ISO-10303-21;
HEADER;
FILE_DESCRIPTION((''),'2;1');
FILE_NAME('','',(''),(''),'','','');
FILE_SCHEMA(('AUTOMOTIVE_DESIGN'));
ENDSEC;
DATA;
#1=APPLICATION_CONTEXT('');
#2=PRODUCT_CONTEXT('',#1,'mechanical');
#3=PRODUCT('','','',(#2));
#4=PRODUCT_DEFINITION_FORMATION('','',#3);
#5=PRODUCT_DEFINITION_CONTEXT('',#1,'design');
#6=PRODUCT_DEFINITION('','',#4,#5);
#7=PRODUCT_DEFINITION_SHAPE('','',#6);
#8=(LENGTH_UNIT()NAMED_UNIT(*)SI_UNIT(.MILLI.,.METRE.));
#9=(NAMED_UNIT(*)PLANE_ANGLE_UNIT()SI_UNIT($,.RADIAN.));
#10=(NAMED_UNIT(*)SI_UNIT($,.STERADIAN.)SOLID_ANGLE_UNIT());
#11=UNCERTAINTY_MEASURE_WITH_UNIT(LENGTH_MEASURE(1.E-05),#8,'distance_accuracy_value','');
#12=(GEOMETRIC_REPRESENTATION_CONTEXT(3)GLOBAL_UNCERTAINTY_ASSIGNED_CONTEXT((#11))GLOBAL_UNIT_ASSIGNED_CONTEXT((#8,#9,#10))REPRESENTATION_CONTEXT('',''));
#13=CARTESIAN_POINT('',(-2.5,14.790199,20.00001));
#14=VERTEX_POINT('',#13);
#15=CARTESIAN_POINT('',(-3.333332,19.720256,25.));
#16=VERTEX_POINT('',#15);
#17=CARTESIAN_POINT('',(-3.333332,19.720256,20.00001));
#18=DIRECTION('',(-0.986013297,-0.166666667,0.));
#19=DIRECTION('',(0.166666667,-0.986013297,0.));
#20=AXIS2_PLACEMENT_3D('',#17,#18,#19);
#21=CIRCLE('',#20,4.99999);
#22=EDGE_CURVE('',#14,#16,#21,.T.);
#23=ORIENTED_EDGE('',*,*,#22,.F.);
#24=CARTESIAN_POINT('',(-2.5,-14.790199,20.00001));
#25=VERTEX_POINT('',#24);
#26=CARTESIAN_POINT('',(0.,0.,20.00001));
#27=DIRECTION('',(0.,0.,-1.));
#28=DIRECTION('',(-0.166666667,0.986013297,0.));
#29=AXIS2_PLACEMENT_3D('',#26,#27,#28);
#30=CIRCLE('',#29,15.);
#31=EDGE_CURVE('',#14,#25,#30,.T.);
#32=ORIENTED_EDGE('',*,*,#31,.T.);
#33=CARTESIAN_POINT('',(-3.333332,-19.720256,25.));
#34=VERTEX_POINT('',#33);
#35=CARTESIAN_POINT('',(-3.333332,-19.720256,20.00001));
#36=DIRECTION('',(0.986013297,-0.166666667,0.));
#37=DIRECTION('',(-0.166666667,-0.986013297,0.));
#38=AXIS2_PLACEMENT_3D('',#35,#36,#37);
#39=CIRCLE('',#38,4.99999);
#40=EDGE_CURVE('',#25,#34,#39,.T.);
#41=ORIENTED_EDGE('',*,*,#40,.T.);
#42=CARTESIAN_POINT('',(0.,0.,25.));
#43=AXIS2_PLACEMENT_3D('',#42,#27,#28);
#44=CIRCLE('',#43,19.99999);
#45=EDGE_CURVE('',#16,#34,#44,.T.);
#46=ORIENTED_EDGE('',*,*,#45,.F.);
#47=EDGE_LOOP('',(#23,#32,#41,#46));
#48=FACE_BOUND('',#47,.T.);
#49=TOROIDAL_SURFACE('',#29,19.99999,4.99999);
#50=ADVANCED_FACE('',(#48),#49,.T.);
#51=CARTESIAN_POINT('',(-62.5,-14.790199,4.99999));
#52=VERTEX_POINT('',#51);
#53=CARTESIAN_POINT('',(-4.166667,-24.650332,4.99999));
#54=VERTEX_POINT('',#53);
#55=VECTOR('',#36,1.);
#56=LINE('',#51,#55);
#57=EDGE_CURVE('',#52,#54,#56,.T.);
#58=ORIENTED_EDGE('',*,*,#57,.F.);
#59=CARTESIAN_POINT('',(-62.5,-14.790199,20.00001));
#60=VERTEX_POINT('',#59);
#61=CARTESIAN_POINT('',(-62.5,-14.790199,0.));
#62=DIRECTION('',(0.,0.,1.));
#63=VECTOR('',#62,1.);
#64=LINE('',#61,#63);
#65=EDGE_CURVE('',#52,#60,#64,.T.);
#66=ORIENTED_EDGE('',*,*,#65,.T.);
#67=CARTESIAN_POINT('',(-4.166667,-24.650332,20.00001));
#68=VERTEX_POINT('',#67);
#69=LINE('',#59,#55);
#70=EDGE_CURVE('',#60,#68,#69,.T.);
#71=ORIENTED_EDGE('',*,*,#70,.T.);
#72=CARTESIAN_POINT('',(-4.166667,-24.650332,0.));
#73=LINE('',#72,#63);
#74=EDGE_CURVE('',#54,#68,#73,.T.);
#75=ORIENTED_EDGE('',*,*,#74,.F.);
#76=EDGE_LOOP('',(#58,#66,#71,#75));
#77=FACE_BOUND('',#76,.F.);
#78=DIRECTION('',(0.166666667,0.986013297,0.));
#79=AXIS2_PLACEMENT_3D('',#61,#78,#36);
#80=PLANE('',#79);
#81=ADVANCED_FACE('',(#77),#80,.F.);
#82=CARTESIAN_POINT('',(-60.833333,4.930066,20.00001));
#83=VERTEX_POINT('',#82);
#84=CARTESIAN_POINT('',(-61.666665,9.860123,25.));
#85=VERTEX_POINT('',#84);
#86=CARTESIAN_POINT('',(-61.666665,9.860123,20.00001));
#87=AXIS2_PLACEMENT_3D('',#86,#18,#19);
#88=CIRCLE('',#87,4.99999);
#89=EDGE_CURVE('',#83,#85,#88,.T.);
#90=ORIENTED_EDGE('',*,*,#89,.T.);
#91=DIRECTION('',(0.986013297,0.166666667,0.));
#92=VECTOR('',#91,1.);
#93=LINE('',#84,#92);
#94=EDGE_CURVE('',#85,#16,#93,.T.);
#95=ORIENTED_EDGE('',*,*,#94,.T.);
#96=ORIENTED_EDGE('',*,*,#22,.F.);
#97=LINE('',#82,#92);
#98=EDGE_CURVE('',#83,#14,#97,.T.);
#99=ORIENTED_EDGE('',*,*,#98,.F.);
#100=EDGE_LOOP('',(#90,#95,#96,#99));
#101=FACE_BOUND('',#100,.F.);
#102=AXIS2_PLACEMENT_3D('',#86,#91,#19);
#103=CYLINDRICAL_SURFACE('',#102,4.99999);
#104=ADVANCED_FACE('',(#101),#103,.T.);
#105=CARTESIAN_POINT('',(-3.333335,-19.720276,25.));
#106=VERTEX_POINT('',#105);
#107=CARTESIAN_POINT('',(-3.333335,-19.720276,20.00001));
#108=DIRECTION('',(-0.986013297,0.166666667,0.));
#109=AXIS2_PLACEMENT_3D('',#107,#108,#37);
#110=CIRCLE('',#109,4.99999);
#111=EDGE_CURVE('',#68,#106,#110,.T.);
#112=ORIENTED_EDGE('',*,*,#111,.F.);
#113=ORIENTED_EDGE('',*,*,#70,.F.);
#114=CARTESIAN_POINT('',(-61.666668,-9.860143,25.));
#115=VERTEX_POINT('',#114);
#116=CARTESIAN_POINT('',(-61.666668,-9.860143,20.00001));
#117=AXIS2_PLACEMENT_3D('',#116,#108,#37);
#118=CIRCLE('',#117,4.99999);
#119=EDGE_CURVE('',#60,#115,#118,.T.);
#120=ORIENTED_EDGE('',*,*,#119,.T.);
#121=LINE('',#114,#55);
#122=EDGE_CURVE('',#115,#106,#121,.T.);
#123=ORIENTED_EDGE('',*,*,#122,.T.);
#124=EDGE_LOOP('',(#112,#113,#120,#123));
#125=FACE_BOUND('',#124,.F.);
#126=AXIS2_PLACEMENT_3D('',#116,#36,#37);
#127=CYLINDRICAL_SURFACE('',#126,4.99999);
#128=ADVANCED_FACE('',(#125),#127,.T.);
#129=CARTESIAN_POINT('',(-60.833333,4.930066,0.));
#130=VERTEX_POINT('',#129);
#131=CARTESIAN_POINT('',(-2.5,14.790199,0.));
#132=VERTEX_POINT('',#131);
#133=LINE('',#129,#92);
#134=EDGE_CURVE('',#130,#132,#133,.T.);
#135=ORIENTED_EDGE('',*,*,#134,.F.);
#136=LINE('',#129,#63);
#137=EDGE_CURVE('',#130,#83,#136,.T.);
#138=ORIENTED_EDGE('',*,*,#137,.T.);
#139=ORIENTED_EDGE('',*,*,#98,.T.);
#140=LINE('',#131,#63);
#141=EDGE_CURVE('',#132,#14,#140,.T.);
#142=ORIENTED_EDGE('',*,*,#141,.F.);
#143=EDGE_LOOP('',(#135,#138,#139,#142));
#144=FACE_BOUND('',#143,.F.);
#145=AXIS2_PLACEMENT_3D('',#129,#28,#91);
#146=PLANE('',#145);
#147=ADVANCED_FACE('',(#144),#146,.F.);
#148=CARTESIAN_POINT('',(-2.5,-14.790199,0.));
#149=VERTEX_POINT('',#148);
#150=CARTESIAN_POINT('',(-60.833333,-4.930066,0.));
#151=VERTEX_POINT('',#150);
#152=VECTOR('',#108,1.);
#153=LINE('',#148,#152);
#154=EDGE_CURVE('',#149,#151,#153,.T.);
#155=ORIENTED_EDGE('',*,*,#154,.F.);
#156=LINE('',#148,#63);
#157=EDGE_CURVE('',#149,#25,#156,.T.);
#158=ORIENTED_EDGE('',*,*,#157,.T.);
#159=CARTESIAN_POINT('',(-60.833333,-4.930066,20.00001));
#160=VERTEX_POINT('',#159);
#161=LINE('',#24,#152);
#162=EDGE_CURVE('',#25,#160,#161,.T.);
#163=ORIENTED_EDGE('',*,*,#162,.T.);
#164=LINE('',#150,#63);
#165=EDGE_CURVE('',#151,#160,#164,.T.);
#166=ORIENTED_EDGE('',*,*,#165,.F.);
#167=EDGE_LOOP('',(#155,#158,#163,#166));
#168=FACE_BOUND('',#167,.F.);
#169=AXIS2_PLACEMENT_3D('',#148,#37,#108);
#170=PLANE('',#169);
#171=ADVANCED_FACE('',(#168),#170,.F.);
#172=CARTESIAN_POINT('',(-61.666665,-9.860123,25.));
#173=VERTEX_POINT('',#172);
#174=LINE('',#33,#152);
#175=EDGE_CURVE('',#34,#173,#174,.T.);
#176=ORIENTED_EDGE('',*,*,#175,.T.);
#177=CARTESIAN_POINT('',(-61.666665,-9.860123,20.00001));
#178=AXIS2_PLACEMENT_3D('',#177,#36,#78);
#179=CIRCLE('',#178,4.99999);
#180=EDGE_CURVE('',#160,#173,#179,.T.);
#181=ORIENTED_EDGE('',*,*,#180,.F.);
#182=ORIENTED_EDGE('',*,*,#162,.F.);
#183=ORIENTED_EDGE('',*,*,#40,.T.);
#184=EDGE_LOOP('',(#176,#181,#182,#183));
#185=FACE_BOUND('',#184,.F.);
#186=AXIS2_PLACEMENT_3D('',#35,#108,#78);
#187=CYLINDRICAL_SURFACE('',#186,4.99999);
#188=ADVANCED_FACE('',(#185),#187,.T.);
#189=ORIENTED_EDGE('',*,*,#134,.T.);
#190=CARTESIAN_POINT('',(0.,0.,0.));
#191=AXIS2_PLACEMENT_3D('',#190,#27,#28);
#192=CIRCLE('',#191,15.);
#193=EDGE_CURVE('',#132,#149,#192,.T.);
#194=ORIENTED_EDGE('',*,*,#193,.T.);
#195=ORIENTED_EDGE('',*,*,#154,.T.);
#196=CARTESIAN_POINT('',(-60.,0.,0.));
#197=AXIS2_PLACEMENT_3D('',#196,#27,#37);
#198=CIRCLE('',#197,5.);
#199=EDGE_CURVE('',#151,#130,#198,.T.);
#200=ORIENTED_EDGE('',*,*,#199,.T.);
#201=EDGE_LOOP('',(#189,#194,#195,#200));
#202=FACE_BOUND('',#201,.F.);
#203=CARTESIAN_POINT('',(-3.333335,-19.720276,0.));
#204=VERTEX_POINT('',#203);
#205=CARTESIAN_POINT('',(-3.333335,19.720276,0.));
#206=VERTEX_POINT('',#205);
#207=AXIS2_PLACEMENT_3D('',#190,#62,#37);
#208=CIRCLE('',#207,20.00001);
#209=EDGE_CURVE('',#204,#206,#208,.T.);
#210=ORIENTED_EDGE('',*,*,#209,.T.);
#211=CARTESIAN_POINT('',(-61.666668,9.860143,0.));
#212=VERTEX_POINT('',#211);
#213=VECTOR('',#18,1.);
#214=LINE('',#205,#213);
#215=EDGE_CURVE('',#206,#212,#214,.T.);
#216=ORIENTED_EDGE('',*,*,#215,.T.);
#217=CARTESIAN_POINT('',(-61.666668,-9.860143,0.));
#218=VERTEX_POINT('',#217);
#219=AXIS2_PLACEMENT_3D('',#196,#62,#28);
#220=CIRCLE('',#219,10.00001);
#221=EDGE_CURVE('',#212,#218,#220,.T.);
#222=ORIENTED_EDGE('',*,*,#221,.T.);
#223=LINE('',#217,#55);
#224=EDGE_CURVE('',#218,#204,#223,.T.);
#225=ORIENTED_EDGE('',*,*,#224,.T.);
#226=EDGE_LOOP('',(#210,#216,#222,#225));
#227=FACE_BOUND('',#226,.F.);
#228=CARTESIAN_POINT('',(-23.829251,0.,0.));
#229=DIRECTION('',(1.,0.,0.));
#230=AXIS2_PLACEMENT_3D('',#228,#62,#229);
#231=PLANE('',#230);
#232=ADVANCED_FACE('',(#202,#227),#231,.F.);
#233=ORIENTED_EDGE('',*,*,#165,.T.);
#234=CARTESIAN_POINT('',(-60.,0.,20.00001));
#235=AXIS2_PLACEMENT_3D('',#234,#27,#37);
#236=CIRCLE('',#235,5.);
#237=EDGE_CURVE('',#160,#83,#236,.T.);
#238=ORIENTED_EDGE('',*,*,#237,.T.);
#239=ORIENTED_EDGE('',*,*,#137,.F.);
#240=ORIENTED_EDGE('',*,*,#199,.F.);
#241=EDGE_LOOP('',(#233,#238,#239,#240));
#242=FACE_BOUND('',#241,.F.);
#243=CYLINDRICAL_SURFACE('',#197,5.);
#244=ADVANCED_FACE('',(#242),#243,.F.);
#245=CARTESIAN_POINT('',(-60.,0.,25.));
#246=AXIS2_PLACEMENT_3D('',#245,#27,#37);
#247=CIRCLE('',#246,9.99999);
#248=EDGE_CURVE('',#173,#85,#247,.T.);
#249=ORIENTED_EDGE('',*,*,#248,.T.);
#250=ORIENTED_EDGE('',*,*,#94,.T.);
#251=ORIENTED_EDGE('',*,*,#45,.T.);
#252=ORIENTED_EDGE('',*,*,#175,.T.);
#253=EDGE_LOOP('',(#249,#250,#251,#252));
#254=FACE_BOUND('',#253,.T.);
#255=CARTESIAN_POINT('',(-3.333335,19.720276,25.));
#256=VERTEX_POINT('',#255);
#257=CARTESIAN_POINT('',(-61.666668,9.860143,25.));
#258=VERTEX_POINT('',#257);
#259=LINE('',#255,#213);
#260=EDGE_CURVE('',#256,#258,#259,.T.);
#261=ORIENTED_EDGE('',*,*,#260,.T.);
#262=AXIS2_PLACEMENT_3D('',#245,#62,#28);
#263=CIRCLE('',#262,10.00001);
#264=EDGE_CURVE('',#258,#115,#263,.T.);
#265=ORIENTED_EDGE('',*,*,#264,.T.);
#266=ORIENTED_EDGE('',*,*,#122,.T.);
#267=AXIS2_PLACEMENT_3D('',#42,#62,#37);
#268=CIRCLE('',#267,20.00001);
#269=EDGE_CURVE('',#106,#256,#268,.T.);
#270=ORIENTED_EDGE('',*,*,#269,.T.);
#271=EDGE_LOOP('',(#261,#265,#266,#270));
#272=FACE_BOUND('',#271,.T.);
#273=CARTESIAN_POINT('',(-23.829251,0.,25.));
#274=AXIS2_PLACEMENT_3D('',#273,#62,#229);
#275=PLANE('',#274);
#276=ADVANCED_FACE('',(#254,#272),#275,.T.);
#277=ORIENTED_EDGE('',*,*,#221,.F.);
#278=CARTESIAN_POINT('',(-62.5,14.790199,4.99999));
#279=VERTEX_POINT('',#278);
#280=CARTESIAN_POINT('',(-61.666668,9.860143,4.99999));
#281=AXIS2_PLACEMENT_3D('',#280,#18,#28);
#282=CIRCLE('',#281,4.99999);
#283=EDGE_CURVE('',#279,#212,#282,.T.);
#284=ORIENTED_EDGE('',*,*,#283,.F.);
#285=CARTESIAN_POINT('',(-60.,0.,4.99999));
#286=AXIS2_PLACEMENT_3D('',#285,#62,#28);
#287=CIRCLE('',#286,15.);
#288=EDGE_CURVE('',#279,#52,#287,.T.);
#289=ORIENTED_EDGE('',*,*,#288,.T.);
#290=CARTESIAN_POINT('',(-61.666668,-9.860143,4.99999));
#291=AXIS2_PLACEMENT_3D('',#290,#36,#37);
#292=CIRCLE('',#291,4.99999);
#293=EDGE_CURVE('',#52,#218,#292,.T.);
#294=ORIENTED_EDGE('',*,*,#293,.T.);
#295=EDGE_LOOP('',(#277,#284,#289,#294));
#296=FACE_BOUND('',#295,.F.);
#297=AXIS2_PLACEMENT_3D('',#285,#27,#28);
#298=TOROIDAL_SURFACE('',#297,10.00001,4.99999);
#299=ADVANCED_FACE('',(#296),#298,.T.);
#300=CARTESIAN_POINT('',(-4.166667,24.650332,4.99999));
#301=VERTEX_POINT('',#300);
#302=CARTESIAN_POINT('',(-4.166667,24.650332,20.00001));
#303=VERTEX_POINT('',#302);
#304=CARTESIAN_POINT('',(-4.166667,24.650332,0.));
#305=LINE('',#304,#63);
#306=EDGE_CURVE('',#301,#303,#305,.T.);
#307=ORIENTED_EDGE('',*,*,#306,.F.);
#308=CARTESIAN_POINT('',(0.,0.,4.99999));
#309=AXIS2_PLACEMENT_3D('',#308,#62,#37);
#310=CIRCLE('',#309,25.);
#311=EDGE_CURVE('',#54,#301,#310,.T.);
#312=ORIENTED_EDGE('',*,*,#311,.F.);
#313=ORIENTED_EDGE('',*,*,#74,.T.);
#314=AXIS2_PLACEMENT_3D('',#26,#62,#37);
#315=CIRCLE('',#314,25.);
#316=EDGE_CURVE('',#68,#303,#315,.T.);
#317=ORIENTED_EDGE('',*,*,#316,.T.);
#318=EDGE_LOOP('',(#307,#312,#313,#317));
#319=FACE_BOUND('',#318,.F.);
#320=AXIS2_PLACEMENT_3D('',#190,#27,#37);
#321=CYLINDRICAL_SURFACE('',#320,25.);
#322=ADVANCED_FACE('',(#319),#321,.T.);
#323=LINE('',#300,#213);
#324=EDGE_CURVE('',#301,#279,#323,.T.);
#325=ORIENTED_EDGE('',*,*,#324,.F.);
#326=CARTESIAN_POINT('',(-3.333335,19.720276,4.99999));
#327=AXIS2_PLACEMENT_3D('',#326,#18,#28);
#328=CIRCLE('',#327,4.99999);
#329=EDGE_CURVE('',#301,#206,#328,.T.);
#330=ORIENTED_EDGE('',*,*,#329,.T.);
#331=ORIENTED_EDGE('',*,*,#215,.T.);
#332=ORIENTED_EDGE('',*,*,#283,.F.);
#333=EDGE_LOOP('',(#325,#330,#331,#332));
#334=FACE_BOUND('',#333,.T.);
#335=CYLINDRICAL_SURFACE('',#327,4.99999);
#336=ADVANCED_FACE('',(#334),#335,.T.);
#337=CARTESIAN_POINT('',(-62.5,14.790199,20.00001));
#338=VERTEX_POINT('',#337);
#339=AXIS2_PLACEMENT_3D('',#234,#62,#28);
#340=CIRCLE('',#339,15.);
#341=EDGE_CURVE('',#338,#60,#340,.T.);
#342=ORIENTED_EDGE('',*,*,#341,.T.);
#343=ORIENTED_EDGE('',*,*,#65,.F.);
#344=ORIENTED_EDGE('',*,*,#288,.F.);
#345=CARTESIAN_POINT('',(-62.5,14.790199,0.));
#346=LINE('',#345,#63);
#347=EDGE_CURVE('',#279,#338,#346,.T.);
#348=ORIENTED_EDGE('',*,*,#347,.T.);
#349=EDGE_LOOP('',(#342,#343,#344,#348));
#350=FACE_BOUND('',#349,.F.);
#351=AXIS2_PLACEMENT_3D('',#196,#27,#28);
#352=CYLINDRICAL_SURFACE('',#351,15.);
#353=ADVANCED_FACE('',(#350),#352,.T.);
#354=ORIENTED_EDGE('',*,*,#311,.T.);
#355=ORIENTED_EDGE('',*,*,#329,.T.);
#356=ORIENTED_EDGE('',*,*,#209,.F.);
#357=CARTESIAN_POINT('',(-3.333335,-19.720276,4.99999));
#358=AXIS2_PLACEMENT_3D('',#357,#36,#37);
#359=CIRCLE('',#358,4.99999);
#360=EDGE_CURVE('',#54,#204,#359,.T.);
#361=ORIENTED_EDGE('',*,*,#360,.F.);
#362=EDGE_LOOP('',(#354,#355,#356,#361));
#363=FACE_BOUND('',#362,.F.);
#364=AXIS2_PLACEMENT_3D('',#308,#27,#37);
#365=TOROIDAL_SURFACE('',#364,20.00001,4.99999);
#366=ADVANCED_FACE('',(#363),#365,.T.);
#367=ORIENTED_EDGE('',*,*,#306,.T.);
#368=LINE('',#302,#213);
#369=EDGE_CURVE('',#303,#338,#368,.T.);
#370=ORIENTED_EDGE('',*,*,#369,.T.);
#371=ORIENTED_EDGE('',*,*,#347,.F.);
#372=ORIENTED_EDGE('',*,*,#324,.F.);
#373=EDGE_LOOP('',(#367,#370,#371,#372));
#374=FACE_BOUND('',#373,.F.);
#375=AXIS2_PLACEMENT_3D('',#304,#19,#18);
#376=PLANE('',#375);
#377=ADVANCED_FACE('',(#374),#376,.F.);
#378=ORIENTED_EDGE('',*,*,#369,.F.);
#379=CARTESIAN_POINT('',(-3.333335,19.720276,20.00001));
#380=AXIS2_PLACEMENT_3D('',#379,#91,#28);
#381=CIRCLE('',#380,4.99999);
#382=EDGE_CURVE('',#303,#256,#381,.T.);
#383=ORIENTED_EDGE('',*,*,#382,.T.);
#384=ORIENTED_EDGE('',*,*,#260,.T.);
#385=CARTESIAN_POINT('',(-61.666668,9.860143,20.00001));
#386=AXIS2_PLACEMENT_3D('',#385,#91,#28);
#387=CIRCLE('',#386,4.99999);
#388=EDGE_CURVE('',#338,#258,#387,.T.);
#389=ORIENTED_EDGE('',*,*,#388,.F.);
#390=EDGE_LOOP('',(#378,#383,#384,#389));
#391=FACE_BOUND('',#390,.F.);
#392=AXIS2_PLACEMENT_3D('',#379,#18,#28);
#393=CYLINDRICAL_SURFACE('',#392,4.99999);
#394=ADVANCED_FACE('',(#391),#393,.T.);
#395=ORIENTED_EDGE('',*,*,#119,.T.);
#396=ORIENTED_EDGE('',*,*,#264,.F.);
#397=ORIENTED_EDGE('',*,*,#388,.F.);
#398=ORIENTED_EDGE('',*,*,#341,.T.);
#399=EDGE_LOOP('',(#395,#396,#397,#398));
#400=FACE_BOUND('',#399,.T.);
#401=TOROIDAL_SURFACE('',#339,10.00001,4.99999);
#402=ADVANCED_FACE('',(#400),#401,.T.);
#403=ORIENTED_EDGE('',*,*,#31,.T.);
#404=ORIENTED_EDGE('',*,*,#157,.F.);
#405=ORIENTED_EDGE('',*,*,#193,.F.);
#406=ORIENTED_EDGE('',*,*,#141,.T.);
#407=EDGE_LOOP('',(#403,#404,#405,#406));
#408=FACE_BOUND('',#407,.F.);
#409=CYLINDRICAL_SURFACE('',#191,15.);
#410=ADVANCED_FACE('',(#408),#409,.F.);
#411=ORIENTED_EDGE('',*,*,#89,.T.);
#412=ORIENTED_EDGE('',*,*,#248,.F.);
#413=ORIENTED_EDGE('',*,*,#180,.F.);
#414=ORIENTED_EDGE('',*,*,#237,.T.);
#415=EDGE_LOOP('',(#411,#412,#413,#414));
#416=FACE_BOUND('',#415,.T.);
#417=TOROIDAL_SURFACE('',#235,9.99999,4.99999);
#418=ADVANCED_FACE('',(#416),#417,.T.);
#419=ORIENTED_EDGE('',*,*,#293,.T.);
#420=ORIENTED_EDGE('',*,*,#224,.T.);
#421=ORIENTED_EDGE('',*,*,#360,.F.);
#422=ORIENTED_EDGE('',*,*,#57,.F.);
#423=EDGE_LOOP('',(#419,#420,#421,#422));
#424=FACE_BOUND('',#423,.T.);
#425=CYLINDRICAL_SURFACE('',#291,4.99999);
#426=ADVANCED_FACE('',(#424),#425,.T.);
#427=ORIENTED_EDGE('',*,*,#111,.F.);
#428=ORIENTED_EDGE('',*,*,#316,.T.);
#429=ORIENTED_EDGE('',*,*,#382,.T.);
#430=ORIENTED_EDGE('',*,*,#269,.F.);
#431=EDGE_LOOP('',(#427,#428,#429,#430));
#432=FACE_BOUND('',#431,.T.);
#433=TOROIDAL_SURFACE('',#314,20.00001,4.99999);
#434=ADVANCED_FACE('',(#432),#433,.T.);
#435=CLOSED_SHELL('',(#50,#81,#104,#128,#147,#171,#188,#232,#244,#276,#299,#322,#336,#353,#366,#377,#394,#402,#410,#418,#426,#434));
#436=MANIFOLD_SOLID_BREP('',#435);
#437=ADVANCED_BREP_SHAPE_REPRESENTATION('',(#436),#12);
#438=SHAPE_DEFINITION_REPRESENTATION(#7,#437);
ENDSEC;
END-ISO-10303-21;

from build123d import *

# Parameters (mm, degrees)
F1_DEPTH = 25
F2_R     = 4.99999


# Not quite as in the source:
# - a fillet or chamfer is up to 0.001 mm smaller than in the source, because OpenCascade refuses the exact size


with BuildPart() as f1:
    # F0 (on Top) → F1 (new body)
    with BuildSketch(Plane.XY):
        with BuildLine():
            Line((-4.1666666667, 24.6503324296), (-62.5, 14.7901994577))
            ThreePointArc((-62.5, 14.7901994577), (-75, 0), (-62.5, -14.7901994577))
            Line((-62.5, -14.7901994577), (-4.1666666667, -24.6503324296))
            ThreePointArc((-4.1666666667, -24.6503324296), (25, 0), (-4.1666666667, 24.6503324296))
        make_face()
        with BuildLine():
            ThreePointArc((-60.8333333333, -4.9300664859), (-65, 0), (-60.8333333333, 4.9300664859))
            Line((-60.8333333333, 4.9300664859), (-2.5, 14.7901994577))
            ThreePointArc((-2.5, 14.7901994577), (15, 0), (-2.5, -14.7901994577))
            Line((-2.5, -14.7901994577), (-60.8333333333, -4.9300664859))
        make_face(mode=Mode.SUBTRACT)
    extrude(amount=F1_DEPTH)

    # F2 (radius 5 in the source; OpenCascade refuses exactly that, so slightly less here)
    f2_edges = [f1.edges().sort_by_distance(p)[0] for p in [
        (25, 0, 25),
        (-33.333333, 19.720266, 25),
        (-75, 0, 25),
        (-33.333333, -19.720266, 25),
        (-31.666667, 9.860133, 25),
        (15, 0, 25),
        (-31.666667, -9.860133, 25),
        (-65, 0, 25),
        (-4.166667, -24.650332, 12.5),
        (-4.166667, 24.650332, 12.5),
        (25, 0, 0),
    ]]
    fillet(f2_edges, radius=F2_R)


solid = f1.part
